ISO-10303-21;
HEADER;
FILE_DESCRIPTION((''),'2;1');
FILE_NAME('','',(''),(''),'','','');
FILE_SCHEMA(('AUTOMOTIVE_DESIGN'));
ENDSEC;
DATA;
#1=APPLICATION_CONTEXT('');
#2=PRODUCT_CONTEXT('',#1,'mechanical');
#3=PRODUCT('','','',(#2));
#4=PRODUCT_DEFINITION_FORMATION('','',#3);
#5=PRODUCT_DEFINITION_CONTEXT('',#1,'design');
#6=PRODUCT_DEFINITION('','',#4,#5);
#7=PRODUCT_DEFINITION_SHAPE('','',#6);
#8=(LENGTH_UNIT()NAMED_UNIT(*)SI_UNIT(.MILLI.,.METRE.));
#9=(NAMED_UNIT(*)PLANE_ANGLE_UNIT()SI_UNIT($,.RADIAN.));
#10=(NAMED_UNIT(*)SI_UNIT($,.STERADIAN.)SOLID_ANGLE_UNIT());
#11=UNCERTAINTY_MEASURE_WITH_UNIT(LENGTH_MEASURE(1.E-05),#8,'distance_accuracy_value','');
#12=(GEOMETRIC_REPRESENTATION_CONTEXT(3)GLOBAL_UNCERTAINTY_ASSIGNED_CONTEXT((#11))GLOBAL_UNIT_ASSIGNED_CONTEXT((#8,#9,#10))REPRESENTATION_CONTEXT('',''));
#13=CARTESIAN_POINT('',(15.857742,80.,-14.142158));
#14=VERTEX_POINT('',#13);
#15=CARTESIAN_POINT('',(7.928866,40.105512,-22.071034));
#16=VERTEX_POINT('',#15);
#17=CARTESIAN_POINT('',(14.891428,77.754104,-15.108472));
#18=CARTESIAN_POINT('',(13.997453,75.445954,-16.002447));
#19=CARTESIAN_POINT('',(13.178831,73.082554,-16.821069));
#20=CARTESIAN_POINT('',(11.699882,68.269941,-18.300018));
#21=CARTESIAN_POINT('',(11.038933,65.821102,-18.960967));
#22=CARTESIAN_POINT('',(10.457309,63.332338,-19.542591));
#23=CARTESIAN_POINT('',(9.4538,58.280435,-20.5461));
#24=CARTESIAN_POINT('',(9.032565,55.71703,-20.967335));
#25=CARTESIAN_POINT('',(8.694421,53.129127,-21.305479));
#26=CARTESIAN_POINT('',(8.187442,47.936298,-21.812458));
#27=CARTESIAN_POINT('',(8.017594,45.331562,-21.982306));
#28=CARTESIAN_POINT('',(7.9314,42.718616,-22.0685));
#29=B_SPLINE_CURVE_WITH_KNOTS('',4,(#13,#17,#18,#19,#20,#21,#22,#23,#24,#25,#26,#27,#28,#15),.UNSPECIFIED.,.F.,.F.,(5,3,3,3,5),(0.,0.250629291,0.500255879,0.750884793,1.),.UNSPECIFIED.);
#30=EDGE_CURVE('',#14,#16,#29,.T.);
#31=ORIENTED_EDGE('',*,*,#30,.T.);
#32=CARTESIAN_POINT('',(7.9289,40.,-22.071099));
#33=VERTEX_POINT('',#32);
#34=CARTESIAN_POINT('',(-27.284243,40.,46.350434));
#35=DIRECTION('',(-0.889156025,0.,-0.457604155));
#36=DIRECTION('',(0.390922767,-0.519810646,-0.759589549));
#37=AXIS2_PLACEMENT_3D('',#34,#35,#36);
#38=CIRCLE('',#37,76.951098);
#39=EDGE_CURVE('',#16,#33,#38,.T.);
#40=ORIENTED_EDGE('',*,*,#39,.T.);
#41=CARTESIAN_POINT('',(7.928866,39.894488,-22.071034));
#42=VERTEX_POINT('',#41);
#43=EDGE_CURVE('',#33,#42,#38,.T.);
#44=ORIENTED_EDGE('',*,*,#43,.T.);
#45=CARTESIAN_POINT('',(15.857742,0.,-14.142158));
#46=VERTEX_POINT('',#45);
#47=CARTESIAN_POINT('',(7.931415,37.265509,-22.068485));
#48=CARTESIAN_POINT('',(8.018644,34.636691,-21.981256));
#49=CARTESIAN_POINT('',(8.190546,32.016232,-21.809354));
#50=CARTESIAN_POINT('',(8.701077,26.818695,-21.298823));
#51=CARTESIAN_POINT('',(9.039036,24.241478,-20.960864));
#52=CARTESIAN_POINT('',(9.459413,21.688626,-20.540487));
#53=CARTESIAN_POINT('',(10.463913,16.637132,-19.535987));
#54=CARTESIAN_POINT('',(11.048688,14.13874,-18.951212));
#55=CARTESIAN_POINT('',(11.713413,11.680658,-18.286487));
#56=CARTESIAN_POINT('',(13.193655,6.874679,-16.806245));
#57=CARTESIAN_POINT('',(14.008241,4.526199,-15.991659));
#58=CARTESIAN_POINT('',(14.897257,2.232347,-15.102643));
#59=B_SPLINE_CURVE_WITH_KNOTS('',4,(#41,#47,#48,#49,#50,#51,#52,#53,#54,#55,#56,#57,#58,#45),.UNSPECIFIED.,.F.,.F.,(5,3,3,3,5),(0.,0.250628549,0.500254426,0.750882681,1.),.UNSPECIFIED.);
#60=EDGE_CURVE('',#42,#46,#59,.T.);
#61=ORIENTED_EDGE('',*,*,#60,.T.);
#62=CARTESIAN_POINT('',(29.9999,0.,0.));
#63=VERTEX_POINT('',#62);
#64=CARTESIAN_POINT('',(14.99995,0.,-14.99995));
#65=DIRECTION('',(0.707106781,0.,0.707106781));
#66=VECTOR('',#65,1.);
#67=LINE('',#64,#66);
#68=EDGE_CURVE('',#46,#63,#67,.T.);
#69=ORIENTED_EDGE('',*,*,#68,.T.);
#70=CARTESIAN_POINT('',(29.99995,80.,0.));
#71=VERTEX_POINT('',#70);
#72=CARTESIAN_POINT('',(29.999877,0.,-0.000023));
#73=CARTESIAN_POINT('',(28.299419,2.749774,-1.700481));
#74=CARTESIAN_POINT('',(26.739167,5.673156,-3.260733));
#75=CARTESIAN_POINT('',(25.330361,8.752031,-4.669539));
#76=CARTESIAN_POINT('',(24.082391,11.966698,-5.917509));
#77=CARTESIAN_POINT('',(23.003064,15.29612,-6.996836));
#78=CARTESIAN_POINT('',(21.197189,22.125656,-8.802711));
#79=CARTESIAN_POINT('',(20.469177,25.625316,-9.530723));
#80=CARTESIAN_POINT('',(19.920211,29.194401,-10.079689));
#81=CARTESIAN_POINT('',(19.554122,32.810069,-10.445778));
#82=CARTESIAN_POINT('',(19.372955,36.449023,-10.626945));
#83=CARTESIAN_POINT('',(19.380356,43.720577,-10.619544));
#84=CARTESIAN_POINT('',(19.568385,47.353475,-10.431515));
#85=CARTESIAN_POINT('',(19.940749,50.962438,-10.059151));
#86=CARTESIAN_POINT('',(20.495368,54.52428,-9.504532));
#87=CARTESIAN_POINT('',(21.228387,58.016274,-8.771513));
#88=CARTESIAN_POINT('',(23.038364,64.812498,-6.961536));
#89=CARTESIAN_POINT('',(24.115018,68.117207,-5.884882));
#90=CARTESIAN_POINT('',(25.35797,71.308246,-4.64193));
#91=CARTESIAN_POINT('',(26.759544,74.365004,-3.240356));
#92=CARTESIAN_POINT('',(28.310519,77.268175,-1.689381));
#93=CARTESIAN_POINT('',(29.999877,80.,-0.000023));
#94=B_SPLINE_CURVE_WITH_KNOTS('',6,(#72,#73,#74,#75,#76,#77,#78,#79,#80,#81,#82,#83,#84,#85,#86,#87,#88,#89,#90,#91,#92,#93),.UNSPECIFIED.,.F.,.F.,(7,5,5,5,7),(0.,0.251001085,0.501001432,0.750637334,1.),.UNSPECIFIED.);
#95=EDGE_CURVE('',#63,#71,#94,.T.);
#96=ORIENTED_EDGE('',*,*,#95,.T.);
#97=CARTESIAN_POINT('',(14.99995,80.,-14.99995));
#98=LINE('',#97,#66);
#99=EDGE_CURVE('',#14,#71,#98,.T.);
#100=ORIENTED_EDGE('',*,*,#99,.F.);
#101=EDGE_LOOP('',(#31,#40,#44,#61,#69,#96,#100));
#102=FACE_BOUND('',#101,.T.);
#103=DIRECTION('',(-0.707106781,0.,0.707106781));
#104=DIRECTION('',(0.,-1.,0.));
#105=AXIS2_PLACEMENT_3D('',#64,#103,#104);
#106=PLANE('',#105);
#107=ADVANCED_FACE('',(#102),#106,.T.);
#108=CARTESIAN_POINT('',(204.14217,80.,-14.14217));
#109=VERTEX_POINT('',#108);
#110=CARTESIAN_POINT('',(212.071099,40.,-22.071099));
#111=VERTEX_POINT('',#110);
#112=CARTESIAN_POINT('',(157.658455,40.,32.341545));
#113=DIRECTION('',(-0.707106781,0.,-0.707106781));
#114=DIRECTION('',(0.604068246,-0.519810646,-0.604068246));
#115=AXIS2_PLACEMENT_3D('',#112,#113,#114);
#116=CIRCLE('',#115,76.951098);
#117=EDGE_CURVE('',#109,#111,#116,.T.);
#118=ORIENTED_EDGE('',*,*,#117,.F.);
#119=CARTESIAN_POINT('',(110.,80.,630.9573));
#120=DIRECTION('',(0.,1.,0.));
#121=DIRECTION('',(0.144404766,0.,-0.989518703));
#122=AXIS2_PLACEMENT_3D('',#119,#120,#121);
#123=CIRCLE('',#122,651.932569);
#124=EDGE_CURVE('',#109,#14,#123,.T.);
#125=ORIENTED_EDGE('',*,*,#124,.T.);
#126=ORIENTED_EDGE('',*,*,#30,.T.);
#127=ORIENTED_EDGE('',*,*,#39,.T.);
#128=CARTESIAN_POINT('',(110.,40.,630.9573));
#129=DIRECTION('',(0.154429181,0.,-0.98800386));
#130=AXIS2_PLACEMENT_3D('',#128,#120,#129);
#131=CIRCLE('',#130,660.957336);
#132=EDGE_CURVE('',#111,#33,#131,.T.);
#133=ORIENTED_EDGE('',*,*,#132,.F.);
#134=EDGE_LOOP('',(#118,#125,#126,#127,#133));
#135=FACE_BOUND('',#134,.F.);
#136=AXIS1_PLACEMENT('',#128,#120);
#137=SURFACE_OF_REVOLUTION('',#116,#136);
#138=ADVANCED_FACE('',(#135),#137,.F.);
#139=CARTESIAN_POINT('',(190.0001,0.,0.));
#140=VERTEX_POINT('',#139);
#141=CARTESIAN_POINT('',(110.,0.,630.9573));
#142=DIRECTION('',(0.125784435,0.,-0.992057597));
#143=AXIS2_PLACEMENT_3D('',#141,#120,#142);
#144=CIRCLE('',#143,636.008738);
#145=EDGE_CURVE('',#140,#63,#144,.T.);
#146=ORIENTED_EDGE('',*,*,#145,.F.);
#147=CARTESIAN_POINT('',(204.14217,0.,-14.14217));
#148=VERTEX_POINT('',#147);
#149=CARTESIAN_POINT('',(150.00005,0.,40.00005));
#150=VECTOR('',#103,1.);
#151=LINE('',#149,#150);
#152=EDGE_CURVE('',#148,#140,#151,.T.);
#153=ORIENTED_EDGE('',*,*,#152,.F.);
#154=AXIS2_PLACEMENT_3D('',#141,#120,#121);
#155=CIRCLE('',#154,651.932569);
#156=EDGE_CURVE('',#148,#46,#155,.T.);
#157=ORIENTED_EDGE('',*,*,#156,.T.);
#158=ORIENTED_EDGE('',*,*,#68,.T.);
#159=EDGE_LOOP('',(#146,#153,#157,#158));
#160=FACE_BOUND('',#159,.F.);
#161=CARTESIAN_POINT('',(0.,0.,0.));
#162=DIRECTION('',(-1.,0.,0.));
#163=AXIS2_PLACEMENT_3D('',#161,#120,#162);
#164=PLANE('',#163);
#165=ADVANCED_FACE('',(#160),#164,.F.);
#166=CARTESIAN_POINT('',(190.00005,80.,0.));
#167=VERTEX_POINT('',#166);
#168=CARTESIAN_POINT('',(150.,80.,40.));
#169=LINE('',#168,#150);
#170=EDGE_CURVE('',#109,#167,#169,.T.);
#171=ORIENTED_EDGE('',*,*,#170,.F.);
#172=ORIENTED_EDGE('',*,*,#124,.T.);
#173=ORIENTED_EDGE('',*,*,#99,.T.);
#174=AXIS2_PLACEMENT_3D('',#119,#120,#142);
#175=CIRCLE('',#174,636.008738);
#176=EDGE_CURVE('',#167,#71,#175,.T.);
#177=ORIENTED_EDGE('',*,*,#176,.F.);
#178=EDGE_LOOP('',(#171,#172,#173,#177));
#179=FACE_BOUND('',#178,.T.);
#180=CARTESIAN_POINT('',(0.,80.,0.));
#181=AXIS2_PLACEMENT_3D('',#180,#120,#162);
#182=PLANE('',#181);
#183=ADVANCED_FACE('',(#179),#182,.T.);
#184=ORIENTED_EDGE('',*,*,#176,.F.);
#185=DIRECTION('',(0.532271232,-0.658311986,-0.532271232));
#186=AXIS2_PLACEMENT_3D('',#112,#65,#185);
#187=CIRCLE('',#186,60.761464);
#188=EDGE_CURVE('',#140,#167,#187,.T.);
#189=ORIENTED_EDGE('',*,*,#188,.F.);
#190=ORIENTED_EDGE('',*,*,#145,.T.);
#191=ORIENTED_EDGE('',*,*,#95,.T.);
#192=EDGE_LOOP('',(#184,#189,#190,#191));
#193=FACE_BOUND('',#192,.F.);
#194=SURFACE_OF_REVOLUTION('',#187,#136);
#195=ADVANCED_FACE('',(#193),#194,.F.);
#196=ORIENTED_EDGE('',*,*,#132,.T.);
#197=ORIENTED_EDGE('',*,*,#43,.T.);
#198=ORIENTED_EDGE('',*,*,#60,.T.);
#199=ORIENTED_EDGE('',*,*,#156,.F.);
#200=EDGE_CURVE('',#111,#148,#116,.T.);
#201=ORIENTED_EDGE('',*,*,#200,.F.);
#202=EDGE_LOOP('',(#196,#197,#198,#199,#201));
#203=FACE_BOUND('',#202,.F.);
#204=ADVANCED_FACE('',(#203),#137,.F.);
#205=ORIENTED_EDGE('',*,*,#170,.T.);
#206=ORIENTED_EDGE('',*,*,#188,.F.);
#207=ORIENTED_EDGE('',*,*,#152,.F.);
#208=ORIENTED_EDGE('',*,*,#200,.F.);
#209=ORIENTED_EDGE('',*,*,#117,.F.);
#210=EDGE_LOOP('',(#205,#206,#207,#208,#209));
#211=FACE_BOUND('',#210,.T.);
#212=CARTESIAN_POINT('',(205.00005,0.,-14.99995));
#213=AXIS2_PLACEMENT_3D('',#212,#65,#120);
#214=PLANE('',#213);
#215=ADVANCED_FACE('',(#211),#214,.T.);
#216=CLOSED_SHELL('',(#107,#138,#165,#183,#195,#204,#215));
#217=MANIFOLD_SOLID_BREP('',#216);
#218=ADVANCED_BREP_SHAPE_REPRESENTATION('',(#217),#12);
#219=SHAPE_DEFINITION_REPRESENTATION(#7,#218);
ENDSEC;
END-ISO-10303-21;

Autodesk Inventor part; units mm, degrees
ref_plane "YZ Plane" through (0, 0, 0) normal (1, 0, 0) x (0, 1, 0)
ref_plane "XZ Plane" through (0, 0, 0) normal (0, 1, 0) x (-1, 0, 0)
ref_plane "XY Plane" through (0, 0, 0) normal (0, 0, 1) x (1, 0, 0)
sketch "Эскиз1" plane through (0, 0, 0) normal (0, 1, 0) x (-1, 0, 0)
  line L0 (0, 0) -> (-220, 0)
  line L1 (-220, 0) -> (-220, -30)
  line L2 (-220, -30) -> (0, -30)
  line L3 (0, -30) -> (0, 0)
  dimension "d0" = 220
  dimension "d1" = 30
extrude "Выдавливание1" add sketch "Эскиз1" along normal blind 80
chamfer "Фаска1" distance 30 angle 45 2 edges at (0, 40, 0) (220, 40, 0)
sketch "Эскиз2" plane through (0, 80, 0) normal (0, 1, 0) x (1, 0, 0)
  line L0 (220, 30) -> (190, 0) projected
  line L1 (220, 30) -> (0, 30) projected
  line L2 (30, 0) -> (0, 30) projected
  line L3 (30, 0) -> (190, 0) projected
  arc A0 (212.0711, 22.0711) -> (7.9289, 22.0711) centre (110, -630.9573) ccw
  line L4 (0, 30) -> (30, 0) projected
  line L5 (15, 15) -> (7.9289, 22.0711)
  line L6 (220, 30) -> (190, 0) projected
  line L7 (220, 30) -> (0, 30) projected
  arc A1 (190, 0) -> (30, 0) centre (110, -630.9573) ccw
  line L8 (30, 0) -> (190, 0) projected
  point P0 (0, 0)
  point P1 (110, 0)
  point P2 (110, 0)
  dimension "d7" = 10
extrude "Выдавливание2" cut sketch "Эскиз2" against normal through all contours L0 A0 L1 | A0 L2 L1 | L3 A1
sketch "Эскиз3" plane through (212.0711, 0, -22.0711) normal (0.7071068, 0, 0.7071068) x (0.7071068, 0, -0.7071068)
  line L0 (0, 0) -> (0, 80) projected
  line L1 (0, 80) -> (-31.2132, 80) projected
  line L2 (-31.2132, 80) -> (-31.2132, 0) projected
  line L3 (-31.2132, 0) -> (0, 0) projected
  line L4 (0, 80) -> (-31.2132, 80) projected
  arc A0 (-11.2132, 0) -> (-11.2132, 80) centre (-76.9511, 40) ccw
  line L5 (-31.2132, 0) -> (0, 0) projected
  line L6 (0, 0) -> (0, 80) projected
  arc A1 (-31.2132, 0) -> (-31.2132, 80) centre (-76.9511, 40) ccw
  line L7 (-31.2132, 80) -> (-31.2132, 0) projected
  line L8 (-31.2132, 0) -> (-11.2132, 0)
  line L9 (-31.2132, 80) -> (-11.2132, 80)
  point P0 (-31.2132, 40)
  point P1 (-31.2132, 40)
  dimension "d10" = 20
  dimension "d11" = 60.7614
  dimension "d12" = 76.9511
sketch3d "3D эскиз1"
  arc A0 (212.0711, 80, -22.0711) -> (7.9289, 80, -22.0711) centre (110, 80, 630.9573) ccw
sweep "Сдвиг1" cut profiles "Эскиз3" path "3D эскиз1" contours L3 A0 L0 | A0 L1 L0 | L2 A1
properties part number "dou_long" material "Красное дерево"
